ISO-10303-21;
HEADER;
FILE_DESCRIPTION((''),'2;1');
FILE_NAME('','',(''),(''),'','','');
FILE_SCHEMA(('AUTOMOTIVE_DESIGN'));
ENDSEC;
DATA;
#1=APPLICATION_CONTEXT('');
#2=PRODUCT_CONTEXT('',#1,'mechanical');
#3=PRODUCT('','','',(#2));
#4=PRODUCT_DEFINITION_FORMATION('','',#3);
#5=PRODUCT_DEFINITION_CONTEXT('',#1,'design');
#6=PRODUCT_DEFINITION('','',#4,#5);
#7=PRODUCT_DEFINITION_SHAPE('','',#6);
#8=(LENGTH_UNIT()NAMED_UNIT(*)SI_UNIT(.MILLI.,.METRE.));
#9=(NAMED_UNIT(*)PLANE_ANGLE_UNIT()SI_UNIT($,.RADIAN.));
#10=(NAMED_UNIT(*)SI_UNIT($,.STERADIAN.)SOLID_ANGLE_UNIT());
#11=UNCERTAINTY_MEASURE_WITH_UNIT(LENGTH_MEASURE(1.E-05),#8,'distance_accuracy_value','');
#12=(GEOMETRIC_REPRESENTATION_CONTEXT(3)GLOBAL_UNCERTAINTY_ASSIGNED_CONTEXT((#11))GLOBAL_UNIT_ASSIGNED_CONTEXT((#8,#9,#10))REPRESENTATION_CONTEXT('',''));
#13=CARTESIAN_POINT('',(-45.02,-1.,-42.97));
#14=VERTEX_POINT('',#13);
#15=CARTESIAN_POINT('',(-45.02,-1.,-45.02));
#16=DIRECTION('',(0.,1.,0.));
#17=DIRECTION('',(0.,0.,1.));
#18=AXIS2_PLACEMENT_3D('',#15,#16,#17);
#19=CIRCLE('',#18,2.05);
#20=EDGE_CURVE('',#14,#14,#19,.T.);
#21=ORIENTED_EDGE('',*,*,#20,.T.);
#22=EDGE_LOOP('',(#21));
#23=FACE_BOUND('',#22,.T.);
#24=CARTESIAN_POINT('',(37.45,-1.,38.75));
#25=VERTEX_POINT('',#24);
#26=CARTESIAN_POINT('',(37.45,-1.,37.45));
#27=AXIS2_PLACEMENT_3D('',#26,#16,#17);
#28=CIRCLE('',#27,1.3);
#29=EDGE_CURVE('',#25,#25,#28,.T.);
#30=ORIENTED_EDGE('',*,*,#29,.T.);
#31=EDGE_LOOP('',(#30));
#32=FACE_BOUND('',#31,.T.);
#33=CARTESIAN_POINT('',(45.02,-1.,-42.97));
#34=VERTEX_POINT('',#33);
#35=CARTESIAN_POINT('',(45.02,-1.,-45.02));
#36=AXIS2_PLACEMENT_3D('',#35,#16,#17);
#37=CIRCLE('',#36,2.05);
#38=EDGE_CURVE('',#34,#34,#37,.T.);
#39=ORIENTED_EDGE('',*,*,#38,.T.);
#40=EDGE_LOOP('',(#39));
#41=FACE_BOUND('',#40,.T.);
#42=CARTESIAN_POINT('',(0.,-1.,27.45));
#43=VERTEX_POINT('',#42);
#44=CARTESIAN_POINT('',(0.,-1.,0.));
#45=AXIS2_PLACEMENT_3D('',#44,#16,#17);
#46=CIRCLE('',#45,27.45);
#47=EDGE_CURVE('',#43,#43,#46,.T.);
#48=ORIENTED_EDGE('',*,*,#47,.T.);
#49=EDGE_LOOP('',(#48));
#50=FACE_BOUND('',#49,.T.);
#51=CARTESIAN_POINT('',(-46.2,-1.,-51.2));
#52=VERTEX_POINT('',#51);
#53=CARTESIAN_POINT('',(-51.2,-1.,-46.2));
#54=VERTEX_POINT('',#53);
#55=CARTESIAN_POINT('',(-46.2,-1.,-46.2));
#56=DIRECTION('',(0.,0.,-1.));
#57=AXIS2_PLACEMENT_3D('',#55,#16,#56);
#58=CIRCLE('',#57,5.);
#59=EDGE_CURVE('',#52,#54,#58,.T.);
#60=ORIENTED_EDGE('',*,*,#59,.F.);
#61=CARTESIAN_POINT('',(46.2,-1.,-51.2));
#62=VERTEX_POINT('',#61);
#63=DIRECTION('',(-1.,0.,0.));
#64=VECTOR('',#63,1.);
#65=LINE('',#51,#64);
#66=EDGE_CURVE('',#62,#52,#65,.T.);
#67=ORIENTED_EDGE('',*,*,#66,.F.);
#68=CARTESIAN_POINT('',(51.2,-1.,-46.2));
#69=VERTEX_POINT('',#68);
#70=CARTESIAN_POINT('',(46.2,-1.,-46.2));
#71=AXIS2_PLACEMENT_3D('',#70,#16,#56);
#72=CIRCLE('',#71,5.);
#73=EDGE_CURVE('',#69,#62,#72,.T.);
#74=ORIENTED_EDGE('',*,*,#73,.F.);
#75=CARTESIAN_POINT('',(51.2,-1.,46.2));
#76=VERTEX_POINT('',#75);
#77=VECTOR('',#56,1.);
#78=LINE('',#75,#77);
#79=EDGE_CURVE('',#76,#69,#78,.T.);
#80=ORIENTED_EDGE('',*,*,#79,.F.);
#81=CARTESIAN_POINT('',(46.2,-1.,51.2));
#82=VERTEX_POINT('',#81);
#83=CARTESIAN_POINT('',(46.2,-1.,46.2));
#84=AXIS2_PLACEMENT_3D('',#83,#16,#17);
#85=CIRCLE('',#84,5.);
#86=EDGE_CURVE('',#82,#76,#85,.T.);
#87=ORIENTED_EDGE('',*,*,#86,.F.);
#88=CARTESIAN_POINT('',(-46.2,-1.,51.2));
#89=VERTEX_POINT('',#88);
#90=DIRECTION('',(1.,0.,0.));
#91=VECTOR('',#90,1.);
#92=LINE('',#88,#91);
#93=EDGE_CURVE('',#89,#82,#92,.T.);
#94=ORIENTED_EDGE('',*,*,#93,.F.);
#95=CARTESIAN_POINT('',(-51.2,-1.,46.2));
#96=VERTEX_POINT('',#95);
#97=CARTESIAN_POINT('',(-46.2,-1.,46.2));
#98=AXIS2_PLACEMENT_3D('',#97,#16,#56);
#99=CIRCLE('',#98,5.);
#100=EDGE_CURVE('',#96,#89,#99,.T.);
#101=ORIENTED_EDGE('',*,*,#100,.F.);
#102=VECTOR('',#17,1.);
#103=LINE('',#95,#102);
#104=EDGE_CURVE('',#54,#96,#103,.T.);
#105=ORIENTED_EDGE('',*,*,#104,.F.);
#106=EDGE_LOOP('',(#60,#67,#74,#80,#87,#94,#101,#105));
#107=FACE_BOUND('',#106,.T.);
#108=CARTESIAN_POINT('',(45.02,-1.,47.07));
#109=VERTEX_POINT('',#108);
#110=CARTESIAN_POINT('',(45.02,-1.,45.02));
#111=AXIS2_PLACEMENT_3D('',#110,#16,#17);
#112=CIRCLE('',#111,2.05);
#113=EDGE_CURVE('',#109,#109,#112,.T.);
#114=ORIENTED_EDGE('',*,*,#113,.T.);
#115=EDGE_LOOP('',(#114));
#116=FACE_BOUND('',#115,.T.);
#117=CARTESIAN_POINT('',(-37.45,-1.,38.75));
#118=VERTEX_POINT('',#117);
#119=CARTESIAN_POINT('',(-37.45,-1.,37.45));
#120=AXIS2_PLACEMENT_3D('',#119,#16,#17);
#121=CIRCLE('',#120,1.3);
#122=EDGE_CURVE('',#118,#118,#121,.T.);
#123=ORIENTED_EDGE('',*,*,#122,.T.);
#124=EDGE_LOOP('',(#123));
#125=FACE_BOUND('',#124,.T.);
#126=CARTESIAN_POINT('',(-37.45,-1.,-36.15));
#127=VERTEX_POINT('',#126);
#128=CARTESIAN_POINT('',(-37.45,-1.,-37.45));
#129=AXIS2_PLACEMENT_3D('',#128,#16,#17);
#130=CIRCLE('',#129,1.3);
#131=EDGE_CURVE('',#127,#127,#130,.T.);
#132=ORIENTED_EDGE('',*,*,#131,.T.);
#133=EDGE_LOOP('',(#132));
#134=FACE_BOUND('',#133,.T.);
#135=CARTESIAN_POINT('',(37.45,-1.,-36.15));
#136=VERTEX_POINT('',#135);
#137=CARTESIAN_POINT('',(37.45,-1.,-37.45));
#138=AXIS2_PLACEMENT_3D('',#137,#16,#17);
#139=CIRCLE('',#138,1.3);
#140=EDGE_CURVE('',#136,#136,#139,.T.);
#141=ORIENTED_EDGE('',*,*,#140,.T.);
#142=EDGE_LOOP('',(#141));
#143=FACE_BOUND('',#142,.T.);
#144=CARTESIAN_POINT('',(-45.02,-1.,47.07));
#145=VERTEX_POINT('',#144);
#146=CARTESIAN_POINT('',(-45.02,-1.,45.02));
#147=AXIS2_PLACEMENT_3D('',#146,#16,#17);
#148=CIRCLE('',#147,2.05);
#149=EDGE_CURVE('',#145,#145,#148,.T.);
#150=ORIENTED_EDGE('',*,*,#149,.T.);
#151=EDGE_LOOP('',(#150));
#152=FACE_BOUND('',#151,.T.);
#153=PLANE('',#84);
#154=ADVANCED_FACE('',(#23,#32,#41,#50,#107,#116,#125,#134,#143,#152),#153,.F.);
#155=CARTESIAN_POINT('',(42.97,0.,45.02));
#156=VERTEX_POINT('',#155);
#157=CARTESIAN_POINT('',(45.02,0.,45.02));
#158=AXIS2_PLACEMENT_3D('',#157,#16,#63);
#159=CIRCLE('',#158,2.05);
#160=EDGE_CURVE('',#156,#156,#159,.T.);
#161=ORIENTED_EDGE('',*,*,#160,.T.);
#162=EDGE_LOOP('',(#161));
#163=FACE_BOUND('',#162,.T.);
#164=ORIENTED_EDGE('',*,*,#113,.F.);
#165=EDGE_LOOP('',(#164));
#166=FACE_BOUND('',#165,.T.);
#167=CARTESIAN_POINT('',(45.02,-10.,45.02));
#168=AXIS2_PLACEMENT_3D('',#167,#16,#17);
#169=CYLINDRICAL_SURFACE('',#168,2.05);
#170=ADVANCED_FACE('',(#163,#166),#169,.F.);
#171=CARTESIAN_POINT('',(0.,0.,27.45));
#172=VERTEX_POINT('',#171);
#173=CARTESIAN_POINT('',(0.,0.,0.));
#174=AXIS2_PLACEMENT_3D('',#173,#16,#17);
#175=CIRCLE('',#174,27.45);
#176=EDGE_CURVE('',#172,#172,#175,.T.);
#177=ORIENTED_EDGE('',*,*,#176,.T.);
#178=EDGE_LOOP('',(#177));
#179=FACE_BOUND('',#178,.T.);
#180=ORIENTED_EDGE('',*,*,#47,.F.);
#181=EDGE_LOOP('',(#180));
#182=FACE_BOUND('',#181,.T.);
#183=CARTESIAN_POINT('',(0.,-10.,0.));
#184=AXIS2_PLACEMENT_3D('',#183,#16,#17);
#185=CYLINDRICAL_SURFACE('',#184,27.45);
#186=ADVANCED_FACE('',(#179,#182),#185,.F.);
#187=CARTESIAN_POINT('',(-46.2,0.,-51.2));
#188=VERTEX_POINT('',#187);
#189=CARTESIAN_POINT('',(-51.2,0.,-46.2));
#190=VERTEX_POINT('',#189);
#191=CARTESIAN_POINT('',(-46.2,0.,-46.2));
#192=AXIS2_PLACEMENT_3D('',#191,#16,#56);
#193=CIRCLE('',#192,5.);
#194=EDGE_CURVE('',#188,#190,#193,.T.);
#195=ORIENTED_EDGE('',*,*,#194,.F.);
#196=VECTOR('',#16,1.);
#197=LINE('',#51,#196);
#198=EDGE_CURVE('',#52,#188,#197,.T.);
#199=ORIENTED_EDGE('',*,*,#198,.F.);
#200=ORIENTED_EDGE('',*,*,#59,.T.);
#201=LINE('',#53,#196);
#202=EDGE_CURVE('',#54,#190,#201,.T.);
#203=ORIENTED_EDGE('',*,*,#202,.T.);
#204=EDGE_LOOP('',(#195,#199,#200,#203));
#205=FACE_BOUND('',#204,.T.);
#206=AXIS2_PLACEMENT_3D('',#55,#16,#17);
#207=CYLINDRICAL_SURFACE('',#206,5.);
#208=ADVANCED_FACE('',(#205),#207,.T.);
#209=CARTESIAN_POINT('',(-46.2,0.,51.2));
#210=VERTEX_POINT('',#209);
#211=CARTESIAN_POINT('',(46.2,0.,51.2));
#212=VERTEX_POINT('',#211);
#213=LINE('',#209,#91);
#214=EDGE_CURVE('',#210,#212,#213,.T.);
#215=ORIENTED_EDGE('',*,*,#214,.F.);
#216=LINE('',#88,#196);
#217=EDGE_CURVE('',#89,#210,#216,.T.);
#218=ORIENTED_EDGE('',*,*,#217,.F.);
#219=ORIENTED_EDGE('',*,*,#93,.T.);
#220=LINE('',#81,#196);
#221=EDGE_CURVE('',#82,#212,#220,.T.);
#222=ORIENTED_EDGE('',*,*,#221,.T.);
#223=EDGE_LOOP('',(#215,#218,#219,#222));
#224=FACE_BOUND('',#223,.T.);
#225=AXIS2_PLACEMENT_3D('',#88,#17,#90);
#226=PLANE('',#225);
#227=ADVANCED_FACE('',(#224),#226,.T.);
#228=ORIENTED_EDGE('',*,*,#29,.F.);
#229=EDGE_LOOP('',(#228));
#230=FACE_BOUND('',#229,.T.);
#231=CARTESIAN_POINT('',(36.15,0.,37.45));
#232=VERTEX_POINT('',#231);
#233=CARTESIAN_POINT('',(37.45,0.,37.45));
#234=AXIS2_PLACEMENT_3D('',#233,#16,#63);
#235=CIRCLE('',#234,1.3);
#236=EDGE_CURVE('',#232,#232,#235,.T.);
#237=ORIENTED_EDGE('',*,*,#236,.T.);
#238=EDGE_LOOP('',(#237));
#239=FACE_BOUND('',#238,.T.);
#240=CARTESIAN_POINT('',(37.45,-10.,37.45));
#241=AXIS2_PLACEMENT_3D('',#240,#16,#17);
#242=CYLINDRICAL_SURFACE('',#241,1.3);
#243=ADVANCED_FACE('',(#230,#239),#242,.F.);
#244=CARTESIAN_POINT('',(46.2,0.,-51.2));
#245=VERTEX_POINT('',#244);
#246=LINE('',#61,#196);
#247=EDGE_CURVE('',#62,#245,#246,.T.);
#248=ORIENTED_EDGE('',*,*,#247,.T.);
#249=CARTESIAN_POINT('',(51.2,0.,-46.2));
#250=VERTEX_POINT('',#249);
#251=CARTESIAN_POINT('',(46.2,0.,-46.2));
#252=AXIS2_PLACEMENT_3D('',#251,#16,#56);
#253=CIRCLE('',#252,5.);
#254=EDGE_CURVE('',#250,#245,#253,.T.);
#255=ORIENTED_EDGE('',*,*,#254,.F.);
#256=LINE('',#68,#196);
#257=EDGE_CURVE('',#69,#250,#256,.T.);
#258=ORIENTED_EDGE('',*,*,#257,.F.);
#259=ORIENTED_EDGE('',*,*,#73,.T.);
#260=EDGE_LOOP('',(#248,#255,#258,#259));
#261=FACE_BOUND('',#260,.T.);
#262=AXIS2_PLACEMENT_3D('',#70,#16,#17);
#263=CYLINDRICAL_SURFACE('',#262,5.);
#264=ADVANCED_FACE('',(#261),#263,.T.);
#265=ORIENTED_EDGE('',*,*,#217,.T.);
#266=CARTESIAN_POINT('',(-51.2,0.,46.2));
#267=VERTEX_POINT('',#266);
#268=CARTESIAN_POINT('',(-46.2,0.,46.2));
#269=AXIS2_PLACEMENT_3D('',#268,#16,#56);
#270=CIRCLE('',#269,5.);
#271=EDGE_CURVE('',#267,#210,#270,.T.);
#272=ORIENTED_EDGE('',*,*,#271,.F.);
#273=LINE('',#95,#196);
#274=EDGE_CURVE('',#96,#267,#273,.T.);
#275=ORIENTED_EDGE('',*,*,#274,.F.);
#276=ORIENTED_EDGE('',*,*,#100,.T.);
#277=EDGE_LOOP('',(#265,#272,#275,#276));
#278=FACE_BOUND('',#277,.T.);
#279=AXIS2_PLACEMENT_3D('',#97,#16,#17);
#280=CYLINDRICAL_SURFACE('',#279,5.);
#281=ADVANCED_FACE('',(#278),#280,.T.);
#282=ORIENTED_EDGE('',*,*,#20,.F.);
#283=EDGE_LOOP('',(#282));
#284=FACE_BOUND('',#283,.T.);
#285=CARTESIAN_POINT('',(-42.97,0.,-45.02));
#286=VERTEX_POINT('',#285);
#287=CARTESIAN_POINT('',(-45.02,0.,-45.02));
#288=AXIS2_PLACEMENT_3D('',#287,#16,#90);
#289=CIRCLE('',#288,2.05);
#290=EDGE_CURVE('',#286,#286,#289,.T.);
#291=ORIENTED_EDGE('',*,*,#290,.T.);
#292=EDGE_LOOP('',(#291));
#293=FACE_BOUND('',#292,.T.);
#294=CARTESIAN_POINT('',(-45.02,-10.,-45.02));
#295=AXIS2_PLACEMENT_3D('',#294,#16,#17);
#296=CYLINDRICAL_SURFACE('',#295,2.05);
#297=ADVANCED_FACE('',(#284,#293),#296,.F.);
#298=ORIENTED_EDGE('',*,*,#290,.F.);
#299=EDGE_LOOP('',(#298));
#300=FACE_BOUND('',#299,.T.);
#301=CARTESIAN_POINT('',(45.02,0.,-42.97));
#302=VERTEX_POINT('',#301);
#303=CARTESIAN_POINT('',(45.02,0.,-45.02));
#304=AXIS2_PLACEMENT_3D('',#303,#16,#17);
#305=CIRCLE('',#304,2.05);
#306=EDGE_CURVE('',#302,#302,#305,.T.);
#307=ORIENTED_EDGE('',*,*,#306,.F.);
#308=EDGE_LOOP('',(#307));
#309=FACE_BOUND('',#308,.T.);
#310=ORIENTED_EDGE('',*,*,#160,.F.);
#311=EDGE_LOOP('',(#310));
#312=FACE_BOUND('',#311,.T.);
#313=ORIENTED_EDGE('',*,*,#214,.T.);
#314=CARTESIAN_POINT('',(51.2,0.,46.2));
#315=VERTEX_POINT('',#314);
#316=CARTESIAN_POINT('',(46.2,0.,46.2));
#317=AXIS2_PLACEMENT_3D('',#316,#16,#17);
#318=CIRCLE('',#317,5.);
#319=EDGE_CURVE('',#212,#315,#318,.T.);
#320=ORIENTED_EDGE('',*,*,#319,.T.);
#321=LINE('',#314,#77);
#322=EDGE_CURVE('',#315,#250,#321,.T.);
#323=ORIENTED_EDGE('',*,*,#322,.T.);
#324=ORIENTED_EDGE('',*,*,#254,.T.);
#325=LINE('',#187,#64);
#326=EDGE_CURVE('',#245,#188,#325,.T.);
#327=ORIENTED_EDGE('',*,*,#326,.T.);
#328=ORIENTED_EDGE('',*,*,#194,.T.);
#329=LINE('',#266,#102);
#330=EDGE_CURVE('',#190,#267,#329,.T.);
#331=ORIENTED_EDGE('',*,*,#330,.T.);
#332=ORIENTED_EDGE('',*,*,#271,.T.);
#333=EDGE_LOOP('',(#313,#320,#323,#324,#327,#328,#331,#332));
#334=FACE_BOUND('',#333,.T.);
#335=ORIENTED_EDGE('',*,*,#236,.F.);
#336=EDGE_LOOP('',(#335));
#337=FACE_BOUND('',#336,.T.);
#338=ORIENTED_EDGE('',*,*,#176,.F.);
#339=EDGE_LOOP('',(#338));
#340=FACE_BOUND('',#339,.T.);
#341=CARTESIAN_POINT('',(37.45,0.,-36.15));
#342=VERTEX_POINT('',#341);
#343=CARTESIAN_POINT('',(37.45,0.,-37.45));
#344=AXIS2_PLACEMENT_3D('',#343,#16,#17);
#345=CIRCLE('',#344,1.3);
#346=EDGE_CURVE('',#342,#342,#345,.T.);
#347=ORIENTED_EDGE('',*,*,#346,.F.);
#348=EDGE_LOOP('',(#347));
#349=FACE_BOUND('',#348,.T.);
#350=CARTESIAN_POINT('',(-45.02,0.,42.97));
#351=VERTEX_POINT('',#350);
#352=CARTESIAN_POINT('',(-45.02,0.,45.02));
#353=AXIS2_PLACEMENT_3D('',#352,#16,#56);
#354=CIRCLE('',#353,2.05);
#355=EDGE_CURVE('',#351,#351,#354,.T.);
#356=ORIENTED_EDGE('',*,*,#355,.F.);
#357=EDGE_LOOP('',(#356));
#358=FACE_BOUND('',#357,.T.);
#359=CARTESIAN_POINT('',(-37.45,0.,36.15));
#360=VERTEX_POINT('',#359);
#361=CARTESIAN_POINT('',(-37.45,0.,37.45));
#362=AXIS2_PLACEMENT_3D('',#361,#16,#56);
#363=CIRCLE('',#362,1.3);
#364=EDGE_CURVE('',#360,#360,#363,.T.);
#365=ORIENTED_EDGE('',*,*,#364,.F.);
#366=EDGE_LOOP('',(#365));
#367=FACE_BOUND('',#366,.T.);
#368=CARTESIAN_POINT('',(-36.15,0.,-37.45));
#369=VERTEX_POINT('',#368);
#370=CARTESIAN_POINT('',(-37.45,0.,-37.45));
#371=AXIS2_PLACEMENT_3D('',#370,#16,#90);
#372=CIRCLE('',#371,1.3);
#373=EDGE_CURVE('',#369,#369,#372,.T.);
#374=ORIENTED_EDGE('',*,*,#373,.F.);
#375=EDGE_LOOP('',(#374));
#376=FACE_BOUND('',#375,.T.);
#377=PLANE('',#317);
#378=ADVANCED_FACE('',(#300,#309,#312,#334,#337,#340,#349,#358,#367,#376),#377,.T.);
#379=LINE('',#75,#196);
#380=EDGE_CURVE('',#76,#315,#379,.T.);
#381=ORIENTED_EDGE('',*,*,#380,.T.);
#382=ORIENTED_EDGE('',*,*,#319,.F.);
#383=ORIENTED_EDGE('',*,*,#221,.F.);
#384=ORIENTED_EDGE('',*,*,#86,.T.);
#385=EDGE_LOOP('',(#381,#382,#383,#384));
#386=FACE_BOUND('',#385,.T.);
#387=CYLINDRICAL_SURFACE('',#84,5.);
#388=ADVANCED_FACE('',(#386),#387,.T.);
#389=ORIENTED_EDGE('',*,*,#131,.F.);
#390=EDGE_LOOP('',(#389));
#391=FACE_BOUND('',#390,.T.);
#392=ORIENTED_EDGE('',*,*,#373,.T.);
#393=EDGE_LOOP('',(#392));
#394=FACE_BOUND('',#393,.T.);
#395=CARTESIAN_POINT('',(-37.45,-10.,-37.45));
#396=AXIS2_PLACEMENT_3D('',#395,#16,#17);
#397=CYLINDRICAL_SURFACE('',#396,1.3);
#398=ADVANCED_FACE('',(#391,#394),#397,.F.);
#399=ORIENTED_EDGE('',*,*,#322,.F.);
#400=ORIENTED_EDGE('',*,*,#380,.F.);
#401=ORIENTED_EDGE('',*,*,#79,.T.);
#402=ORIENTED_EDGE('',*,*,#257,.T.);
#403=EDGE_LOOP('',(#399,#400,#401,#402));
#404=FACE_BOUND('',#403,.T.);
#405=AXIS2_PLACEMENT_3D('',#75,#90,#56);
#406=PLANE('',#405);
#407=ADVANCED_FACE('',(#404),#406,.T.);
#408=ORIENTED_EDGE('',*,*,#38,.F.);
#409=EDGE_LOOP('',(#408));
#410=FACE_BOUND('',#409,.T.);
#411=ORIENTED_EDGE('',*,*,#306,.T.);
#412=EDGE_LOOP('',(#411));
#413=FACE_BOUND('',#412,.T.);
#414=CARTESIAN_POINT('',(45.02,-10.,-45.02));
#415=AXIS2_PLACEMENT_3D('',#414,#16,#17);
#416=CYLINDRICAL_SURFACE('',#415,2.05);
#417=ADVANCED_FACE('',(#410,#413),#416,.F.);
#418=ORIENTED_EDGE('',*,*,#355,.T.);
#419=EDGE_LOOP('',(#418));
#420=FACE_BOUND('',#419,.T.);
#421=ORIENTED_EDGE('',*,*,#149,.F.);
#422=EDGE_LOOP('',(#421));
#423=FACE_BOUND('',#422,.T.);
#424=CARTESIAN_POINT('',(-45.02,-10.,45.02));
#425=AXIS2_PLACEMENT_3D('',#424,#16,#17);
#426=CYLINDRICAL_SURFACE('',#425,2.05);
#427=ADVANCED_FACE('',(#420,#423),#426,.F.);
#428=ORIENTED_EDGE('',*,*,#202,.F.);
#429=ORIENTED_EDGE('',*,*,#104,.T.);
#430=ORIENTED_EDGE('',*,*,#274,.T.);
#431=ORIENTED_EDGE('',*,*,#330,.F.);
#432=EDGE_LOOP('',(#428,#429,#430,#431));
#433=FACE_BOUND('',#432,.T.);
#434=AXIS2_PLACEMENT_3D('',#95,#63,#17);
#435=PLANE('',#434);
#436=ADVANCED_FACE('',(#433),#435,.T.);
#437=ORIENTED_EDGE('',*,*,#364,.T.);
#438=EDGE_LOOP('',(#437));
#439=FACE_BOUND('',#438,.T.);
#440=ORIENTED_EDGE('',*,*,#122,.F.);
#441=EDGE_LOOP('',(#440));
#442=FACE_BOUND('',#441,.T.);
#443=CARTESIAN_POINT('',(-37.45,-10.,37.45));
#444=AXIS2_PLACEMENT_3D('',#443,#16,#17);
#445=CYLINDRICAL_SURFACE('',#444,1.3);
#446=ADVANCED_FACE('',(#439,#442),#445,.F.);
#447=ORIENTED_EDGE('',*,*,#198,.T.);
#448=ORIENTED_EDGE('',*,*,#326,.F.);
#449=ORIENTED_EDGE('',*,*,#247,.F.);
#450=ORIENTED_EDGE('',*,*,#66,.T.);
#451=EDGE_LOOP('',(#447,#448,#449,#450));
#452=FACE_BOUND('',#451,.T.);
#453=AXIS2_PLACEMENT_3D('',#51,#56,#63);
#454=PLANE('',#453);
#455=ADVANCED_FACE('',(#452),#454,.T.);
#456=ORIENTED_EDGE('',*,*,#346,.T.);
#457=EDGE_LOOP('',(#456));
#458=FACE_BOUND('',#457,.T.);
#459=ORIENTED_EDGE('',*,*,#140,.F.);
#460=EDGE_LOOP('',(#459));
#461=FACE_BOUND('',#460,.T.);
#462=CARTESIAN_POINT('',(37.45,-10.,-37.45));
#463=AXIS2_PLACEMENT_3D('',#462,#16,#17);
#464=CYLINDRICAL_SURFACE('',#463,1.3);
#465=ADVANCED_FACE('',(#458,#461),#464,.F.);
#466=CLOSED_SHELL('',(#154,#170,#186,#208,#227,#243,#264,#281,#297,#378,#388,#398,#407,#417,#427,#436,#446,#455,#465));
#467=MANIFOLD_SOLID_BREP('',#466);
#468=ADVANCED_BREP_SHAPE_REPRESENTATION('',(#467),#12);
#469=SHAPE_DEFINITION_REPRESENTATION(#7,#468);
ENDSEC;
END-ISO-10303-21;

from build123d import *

# Parameters (mm, degrees)
BASE_FLANGE1_DEPTH = 1
SKETCH6_R          = 27.45
CUT_EXTRUDE1_DEPTH = 10
SKETCH8_R          = 2.05
SKETCH8_R_2        = 1.3
CUT_EXTRUDE3_DEPTH = 10
CIRPATTERN2_COUNT  = 4


# Sheet-metal steps are written as plain solids
with BuildPart() as part:
    # Sketch1 → Base-Flange1 (new body)
    with BuildSketch(Plane(origin=(0, 0, 0), x_dir=(1, 0, 0), z_dir=(0, 1, 0))):
        with BuildLine():
            Line((-46.2, -51.2), (46.2, -51.2))
            ThreePointArc((46.2, -51.2), (49.735533906, -49.735533906), (51.2, -46.2))
            Line((51.2, -46.2), (51.2, 46.2))
            ThreePointArc((51.2, 46.2), (49.735533906, 49.735533906), (46.2, 51.2))
            Line((46.2, 51.2), (-46.2, 51.2))
            ThreePointArc((-46.2, 51.2), (-49.735533906, 49.735533906), (-51.2, 46.2))
            Line((-51.2, 46.2), (-51.2, -46.2))
            ThreePointArc((-51.2, -46.2), (-49.735533906, -49.735533906), (-46.2, -51.2))
        make_face()
    extrude(amount=-BASE_FLANGE1_DEPTH)

    # Sketch6 → Cut-Extrude1 (cut)
    with BuildSketch(Plane(origin=(0, 0, 0), x_dir=(1, 0, 0), z_dir=(0, 1, 0))):
        with Locations(Location((0, 0, 0), (0, 0, 270))):
            Circle(SKETCH6_R)
    extrude(amount=-CUT_EXTRUDE1_DEPTH, mode=Mode.SUBTRACT)

    # Sketch8 → Cut-Extrude3 (cut)
    with BuildSketch(Plane(origin=(0, 0, 0), x_dir=(1, 0, 0), z_dir=(0, 1, 0))):
        with Locations(Location((45.02, 45.02, 0), (0, 0, 270))):
            Circle(SKETCH8_R)
        with Locations(Location((37.45, 37.45, 0), (0, 0, 270))):
            Circle(SKETCH8_R_2)
    cut_extrude3 = extrude(amount=-CUT_EXTRUDE3_DEPTH, mode=Mode.SUBTRACT)

    # CirPattern2: Cut-Extrude3 ×4 about axis
    cirpattern2_axis = Axis((0, 0, 0), (0, 1, 0))
    for i in range(1, CIRPATTERN2_COUNT):
        add(cut_extrude3.rotate(cirpattern2_axis, i * 360 / CIRPATTERN2_COUNT), mode=Mode.SUBTRACT)


solid = part.part
